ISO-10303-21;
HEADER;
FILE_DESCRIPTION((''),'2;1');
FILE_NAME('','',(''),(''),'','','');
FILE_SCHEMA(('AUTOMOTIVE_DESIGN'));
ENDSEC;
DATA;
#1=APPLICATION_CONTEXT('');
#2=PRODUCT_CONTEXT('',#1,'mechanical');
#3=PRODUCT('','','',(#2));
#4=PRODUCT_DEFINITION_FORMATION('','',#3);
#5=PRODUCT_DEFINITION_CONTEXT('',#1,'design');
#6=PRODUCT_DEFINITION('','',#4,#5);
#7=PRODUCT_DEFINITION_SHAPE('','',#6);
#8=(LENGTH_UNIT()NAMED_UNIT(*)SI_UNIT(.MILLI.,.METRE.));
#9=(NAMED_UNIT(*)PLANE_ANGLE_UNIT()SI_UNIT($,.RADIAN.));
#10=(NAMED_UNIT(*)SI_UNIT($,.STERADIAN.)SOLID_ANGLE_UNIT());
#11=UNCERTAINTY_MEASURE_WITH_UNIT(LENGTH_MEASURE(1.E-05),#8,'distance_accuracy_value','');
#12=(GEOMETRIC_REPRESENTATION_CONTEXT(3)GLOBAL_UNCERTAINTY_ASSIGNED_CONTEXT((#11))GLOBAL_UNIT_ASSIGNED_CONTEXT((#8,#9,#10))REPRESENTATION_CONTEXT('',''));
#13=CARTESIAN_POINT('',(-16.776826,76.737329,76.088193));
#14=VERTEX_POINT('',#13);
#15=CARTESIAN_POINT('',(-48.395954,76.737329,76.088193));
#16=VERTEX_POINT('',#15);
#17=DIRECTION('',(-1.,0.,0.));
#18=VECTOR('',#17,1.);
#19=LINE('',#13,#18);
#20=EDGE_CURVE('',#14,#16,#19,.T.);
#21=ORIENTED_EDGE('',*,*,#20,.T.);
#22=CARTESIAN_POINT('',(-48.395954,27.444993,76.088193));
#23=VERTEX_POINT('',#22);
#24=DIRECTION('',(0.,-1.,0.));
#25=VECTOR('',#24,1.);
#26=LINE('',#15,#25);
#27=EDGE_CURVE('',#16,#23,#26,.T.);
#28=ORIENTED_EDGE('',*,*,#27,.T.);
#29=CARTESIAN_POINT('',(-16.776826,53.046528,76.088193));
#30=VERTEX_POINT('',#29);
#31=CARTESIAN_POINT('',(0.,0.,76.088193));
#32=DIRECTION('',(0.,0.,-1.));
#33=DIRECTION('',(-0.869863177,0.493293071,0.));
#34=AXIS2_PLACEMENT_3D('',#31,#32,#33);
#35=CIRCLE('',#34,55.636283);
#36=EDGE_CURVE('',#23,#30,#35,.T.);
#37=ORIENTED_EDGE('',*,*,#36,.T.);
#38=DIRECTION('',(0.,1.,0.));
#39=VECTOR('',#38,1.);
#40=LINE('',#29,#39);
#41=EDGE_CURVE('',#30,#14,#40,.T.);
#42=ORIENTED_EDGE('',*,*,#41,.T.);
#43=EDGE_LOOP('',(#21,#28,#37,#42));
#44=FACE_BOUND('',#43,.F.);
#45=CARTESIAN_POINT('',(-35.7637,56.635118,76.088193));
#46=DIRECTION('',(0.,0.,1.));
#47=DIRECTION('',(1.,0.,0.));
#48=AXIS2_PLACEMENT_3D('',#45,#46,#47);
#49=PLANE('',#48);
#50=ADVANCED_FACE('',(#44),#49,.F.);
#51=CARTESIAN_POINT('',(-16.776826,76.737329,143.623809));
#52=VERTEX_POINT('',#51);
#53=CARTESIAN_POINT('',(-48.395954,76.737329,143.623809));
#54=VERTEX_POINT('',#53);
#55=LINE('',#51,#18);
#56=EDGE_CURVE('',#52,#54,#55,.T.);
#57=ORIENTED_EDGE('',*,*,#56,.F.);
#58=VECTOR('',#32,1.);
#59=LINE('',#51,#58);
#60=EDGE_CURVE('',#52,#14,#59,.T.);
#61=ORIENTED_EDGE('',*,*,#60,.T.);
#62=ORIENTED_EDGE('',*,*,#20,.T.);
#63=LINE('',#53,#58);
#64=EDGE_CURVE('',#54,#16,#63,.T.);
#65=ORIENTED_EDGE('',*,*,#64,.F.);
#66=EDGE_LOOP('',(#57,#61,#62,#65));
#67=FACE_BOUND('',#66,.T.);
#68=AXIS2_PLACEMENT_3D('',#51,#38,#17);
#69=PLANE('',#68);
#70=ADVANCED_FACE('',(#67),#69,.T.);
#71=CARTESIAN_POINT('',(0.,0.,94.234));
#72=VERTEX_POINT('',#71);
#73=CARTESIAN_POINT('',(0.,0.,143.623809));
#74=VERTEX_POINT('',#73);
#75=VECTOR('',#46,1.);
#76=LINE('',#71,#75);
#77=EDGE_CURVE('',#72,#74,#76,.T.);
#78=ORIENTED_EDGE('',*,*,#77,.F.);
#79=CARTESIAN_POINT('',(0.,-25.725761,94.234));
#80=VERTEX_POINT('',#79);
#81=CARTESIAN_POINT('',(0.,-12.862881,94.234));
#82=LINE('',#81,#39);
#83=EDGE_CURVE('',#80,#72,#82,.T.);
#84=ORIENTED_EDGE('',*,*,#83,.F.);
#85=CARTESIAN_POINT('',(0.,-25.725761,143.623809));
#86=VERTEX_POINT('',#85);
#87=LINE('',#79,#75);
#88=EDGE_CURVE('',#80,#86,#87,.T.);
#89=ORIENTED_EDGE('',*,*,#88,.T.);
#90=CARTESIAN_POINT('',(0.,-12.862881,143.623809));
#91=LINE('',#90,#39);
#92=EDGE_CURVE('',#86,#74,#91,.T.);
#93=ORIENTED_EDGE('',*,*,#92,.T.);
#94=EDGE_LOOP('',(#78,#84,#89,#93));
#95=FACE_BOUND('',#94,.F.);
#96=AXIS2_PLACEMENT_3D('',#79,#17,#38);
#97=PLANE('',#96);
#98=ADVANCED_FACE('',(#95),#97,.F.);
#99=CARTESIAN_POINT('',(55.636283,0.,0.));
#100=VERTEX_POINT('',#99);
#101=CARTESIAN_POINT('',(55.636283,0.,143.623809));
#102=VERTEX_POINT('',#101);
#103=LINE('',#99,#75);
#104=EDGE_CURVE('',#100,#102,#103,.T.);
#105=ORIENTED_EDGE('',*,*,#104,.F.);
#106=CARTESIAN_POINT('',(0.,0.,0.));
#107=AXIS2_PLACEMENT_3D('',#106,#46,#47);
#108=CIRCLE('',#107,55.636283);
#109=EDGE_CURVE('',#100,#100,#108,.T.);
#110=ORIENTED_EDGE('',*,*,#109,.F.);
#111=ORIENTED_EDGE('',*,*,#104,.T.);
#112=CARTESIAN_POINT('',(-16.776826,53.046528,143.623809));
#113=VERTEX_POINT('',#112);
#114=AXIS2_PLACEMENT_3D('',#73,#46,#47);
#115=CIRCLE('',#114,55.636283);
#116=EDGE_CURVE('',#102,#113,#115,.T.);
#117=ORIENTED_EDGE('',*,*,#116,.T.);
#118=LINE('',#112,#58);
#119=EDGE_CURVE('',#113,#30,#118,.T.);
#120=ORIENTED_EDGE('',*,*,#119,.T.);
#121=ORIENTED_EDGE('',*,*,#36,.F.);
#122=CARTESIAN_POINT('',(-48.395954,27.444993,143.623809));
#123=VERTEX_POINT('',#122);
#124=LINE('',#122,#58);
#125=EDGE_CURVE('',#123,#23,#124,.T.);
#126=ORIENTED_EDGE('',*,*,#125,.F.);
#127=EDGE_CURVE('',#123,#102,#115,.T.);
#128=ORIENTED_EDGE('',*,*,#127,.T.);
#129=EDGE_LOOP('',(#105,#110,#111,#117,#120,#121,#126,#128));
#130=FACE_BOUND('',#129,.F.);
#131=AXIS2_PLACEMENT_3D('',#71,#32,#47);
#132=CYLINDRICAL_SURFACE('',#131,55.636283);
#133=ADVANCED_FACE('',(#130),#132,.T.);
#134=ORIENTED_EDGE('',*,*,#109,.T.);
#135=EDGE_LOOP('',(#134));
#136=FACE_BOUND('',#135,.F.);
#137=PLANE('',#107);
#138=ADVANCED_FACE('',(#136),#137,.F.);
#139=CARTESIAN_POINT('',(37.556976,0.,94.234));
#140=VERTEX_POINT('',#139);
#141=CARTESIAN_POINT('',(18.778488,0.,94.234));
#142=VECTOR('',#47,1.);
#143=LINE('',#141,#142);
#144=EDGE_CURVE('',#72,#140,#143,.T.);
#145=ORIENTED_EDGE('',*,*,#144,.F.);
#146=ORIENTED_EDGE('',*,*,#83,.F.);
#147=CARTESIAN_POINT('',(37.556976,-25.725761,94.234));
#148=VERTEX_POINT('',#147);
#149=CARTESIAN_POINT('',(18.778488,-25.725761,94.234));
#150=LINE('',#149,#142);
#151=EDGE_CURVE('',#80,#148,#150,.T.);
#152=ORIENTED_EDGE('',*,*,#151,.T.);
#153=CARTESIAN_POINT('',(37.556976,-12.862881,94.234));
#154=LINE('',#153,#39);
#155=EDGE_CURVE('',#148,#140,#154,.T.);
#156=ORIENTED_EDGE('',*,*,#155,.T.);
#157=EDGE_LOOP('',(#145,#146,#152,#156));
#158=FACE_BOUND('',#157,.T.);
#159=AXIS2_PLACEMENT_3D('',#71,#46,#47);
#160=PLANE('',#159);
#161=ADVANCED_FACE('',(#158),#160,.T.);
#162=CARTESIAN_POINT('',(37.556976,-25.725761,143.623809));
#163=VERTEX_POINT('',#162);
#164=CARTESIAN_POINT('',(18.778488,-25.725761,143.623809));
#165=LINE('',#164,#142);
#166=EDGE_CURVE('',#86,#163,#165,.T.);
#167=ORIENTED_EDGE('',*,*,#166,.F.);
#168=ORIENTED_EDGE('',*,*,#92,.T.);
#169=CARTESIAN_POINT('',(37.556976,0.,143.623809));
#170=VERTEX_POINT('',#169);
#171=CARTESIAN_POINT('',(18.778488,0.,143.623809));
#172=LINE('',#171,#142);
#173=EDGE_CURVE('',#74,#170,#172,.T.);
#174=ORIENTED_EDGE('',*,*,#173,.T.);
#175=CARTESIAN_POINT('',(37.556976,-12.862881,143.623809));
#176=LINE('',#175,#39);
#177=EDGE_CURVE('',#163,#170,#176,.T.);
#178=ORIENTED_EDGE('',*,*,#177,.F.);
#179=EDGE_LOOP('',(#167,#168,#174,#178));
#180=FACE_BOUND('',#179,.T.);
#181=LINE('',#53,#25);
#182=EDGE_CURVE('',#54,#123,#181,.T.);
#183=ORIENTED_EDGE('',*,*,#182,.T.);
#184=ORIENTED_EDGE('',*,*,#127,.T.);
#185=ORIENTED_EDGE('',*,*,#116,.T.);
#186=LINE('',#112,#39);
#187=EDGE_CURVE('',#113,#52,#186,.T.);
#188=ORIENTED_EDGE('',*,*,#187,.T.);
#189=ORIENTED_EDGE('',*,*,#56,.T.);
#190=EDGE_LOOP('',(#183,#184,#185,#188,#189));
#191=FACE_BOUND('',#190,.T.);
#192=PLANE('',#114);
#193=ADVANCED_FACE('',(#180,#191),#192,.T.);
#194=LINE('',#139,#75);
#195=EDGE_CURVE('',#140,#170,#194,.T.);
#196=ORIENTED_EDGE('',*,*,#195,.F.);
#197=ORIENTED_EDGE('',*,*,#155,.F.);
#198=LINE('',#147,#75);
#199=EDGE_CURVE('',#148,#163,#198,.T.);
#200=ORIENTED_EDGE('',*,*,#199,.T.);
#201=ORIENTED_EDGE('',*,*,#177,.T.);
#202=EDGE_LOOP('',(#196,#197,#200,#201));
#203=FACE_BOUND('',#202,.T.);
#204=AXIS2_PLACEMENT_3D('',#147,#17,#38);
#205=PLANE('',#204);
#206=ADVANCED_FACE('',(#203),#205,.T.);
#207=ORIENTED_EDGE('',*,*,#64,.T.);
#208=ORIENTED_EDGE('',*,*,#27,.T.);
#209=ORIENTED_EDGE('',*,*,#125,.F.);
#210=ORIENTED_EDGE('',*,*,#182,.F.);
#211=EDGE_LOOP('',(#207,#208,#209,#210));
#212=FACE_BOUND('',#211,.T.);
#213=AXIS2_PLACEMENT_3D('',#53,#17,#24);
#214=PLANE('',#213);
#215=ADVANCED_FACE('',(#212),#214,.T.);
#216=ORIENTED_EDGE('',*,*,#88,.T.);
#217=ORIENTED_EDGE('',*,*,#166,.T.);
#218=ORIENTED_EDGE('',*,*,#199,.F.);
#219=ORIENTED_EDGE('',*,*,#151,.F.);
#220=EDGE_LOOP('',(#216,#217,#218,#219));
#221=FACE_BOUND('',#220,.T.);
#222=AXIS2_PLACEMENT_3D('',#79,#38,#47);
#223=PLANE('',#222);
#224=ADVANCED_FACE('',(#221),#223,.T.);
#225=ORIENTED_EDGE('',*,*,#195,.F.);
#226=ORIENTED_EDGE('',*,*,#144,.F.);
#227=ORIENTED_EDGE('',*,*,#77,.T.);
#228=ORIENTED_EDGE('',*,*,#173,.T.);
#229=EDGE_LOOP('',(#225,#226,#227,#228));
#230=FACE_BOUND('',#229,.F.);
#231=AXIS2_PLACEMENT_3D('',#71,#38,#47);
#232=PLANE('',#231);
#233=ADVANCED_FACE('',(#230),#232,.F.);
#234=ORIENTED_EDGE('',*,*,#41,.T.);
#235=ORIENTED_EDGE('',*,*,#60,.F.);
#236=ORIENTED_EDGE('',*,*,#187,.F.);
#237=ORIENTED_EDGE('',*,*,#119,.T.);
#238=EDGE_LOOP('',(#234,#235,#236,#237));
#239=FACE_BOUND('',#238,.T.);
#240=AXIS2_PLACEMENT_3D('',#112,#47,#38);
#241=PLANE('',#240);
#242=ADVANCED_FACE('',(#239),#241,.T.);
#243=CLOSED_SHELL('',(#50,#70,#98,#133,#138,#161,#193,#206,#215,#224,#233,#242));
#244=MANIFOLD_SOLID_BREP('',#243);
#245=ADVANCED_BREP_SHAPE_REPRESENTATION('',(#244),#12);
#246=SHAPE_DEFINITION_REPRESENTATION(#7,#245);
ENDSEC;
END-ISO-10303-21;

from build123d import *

# Parameters (mm, degrees)
F0_R     = 55.6362832235
F1_DEPTH = 94.234
F3_R     = 55.6362832235
F3_W     = 37.5569760799
F3_H     = 25.7257614285
F4_DEPTH = 49.38980937
F6_DEPTH = 67.5356164575


with BuildPart() as f1:
    # F0 (on Top) → F1 (new body)
    with BuildSketch(Plane.XY):
        Circle(F0_R)
    extrude(amount=F1_DEPTH)

    # F3 (on face) → F4 (join)
    with BuildSketch(Plane.XY.offset(94.234)):
        Circle(F3_R)
        with Locations((18.77848804, -12.8628807142)):
            Rectangle(F3_W, F3_H, mode=Mode.SUBTRACT)
    extrude(amount=F4_DEPTH)

    # F5 (on face) → F6 (join)
    with BuildSketch(Plane.XY.offset(143.62380937)):
        with BuildLine():
            Line((-48.3959540725, 76.7373293638), (-48.3959540725, 27.4449929922))
            ThreePointArc((-48.3959540725, 27.4449929922), (-35.010462285, 43.2396061675), (-16.7768262327, 53.046527808))
            Line((-16.7768262327, 53.046527808), (-16.7768262327, 76.7373293638))
            Line((-16.7768262327, 76.7373293638), (-48.3959540725, 76.7373293638))
        make_face()
    extrude(amount=-F6_DEPTH)


solid = f1.part
